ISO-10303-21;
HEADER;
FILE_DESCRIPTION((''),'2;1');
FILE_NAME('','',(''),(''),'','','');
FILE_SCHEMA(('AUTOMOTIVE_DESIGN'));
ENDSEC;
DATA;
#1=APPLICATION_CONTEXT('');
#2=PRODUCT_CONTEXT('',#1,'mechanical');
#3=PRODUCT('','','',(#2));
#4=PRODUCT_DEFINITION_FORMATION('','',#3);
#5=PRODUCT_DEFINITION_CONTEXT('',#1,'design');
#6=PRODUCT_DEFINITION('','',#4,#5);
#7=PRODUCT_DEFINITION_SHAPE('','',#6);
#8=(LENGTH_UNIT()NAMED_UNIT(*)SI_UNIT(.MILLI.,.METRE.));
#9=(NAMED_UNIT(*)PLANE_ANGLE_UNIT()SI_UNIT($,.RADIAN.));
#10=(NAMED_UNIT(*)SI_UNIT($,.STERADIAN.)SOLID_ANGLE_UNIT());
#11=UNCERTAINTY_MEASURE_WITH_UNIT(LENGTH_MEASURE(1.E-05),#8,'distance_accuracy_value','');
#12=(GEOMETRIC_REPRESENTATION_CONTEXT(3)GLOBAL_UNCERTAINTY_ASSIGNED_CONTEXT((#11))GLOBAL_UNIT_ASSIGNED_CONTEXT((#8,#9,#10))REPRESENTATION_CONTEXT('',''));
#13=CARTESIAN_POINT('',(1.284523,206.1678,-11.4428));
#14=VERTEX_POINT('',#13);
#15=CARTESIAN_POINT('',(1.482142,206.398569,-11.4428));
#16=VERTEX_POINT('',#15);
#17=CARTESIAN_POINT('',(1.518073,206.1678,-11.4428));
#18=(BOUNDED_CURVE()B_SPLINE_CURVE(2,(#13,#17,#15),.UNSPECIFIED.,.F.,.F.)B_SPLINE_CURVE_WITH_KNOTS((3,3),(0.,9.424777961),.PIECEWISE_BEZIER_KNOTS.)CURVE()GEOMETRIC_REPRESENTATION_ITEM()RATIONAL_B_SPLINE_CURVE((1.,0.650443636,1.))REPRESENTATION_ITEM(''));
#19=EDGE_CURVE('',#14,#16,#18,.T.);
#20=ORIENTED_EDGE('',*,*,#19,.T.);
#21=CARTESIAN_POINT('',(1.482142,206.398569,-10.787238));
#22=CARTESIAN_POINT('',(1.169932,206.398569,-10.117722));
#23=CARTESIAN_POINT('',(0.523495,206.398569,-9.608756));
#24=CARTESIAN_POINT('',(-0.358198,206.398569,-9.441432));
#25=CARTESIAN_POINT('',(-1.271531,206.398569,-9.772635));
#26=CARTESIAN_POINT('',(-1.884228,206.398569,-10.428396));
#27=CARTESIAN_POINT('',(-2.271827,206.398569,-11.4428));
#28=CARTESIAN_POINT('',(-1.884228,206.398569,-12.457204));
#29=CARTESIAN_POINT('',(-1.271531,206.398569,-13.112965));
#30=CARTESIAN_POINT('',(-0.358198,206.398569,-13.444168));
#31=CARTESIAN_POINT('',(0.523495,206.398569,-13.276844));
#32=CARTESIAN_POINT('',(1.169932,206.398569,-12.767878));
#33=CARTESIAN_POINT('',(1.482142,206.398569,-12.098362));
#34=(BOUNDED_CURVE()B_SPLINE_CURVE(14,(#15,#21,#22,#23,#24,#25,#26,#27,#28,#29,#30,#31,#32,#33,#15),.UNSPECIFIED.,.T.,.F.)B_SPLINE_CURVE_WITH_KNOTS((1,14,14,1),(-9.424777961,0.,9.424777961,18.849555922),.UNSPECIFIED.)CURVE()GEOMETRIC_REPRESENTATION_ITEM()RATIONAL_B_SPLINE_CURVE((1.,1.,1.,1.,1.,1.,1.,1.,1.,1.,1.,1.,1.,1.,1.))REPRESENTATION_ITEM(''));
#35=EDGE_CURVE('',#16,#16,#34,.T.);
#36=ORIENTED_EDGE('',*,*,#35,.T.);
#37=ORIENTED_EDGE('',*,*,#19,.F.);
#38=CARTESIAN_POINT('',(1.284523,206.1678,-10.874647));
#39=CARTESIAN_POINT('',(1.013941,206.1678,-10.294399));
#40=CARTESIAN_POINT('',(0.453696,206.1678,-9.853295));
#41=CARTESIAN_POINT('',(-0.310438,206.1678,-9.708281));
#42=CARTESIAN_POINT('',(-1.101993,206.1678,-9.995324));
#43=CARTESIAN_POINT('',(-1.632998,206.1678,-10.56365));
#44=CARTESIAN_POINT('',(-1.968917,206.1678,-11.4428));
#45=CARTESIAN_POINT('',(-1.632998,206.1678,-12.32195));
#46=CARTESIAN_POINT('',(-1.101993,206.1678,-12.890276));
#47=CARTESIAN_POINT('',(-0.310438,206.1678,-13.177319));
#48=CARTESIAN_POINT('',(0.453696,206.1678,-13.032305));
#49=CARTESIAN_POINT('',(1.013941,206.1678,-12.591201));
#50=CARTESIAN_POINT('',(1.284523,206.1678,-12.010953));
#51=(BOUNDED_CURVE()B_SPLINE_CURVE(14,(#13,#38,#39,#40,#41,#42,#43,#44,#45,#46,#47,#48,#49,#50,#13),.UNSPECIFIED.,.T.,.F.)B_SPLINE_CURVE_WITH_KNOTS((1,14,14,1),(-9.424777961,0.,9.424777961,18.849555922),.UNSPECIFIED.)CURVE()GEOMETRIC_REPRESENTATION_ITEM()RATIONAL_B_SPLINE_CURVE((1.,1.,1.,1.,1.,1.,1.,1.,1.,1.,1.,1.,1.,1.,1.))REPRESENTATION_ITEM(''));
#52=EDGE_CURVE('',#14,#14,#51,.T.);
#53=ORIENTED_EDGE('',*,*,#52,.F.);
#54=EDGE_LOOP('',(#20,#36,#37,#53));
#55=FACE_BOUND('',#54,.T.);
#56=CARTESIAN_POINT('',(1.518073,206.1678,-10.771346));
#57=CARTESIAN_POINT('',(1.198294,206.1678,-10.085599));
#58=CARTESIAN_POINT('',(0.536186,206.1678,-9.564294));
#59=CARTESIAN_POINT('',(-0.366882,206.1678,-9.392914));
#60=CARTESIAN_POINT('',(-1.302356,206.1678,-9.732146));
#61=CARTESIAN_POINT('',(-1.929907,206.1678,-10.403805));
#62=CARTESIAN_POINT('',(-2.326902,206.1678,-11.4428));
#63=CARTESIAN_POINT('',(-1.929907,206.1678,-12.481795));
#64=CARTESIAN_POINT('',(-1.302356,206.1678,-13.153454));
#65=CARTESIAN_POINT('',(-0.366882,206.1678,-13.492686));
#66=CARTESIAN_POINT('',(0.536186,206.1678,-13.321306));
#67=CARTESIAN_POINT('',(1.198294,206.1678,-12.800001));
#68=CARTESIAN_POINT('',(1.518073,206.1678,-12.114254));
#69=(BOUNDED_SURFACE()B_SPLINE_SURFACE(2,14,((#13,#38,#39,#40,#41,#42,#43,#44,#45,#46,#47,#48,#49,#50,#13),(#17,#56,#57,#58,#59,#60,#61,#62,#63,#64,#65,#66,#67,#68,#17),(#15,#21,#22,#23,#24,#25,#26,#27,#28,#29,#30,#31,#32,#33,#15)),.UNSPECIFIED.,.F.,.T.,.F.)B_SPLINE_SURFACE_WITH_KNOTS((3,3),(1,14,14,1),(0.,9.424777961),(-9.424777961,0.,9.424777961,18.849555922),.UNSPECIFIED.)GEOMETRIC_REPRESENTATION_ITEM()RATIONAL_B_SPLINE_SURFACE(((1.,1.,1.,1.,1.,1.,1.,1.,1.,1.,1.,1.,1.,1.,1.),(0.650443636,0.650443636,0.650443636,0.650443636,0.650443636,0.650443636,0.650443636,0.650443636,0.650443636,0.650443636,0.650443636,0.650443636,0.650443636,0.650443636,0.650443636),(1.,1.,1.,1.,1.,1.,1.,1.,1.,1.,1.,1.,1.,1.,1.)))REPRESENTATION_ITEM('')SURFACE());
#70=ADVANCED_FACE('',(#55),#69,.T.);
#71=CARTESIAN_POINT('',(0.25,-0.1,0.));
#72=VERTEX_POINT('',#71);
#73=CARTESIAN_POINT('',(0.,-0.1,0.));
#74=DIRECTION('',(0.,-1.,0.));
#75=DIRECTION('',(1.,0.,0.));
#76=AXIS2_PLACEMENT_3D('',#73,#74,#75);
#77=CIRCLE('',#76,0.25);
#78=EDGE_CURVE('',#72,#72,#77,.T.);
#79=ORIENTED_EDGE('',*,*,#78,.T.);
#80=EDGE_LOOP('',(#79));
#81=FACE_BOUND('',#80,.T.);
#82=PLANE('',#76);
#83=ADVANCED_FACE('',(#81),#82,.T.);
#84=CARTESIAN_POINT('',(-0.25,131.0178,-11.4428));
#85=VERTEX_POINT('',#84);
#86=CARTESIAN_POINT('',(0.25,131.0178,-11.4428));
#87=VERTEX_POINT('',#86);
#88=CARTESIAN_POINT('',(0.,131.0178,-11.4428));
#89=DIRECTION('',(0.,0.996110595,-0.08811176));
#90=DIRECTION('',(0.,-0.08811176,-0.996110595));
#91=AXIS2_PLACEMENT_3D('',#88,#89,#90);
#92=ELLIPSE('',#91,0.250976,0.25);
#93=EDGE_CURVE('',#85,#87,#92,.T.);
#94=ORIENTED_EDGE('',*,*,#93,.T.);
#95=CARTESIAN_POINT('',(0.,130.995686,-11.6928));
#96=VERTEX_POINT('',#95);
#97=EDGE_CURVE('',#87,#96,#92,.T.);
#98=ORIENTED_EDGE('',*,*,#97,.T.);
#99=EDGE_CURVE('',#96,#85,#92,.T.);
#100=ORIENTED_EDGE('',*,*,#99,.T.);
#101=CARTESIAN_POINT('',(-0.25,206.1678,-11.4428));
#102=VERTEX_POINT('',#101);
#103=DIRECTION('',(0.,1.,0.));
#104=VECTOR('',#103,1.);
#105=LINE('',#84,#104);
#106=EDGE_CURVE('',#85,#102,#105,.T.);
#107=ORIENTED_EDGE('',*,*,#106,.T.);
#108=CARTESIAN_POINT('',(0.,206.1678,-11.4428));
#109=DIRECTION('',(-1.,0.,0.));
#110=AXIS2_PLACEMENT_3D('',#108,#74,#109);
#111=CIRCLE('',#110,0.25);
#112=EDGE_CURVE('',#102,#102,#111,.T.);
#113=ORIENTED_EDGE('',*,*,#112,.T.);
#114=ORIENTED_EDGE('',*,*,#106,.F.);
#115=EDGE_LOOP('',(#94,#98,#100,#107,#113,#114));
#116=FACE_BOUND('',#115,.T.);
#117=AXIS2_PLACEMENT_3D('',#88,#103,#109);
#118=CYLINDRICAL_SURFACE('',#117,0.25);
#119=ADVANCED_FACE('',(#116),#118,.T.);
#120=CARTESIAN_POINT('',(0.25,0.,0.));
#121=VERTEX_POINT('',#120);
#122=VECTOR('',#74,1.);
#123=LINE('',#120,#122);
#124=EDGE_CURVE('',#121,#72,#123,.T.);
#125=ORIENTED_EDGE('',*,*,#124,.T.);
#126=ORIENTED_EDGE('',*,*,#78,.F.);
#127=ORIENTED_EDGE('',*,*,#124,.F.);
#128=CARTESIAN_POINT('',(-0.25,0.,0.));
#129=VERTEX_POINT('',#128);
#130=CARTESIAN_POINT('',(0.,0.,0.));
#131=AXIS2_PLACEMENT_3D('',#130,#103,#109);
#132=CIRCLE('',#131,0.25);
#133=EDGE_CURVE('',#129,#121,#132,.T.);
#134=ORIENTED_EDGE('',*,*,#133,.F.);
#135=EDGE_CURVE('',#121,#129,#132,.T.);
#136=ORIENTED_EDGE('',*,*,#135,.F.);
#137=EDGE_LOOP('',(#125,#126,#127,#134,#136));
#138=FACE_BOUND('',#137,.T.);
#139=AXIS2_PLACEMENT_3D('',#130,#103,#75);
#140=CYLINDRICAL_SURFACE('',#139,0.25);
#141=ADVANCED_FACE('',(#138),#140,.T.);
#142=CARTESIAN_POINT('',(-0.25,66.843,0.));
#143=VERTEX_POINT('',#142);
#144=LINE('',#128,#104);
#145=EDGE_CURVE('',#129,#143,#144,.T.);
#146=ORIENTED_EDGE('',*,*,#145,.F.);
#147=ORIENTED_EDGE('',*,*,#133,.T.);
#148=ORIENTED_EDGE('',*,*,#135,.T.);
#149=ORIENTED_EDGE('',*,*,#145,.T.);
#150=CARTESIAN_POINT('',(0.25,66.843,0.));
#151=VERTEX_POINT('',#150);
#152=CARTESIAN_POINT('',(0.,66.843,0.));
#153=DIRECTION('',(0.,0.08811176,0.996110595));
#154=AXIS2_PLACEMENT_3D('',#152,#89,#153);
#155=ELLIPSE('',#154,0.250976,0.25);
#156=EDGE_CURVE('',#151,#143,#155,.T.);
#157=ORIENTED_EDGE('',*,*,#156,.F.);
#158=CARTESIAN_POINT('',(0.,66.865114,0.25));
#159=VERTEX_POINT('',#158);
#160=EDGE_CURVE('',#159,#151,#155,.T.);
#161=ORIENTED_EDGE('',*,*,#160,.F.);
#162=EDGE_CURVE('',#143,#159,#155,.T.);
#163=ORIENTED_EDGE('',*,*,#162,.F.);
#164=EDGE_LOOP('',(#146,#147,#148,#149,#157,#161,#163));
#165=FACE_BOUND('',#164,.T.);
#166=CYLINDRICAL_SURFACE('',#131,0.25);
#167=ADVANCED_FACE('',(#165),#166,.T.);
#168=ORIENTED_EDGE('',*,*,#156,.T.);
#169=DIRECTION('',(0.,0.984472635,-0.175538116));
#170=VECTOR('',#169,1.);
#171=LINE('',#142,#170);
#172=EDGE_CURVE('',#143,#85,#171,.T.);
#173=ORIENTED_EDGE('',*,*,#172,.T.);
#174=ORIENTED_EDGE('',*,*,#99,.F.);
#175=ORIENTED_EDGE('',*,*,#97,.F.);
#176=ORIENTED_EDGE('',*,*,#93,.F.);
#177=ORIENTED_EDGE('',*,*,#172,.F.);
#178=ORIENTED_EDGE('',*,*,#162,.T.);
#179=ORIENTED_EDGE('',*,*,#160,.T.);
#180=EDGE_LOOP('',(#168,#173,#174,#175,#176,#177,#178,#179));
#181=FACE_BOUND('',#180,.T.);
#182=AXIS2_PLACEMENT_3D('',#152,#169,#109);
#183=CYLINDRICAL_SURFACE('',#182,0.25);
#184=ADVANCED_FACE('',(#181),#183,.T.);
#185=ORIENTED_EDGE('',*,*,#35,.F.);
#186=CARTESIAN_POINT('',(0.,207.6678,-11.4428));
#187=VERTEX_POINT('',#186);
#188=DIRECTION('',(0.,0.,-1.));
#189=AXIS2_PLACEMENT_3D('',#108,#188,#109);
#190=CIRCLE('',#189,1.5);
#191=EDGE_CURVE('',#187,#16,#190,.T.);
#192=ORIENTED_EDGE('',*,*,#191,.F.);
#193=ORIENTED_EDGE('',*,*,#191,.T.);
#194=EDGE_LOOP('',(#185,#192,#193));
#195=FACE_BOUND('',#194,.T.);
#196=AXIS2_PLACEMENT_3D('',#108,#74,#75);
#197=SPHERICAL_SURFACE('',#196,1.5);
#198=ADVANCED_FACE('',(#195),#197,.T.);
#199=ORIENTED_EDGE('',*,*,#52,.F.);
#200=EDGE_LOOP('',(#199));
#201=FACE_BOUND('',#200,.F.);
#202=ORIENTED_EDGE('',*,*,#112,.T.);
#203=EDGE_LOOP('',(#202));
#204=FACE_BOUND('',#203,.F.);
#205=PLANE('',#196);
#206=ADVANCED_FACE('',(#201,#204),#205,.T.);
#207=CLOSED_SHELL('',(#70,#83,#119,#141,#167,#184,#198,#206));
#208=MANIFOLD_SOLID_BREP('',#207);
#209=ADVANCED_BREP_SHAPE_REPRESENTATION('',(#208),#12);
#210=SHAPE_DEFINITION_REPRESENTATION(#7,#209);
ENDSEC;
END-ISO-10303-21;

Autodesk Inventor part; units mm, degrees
ref_plane "YZ Plane" through (0, 0, 0) normal (1, 0, 0) x (0, 1, 0)
ref_plane "XZ Plane" through (0, 0, 0) normal (0, 1, 0) x (-1, 0, 0)
sketch "Sketch1" plane through (0, 0, 0) normal (0, 1, 0) x (-1, 0, 0)
  circle A0 centre (0, 0) radius 0.25
  dimension "d0" = 0.5
sketch "Sketch2" plane through (0, 0, 0) normal (1, 0, 0) x (0, 1, 0)
  line L0 (0, 0) -> (66.843, 0)
  line L1 (66.843, 0) -> (131.0178, -11.4428)
  line L2 (131.0178, -11.4428) -> (206.1678, -11.4428)
  dimension "d1" = 66.843
  dimension "d2" = 169.89
  dimension "d3" = 65.187
  dimension "d4" = 75.15
sweep "Sweep1" add profiles "Sketch1" path "Sketch2"
sketch "Sketch3" plane through (0, 206.1678, -11.4428) normal (0, 1, 0) x (1, 0, 0)
  line L0 (0, 0) -> (-0.3702, 0) construction
  point P0 (0, -11.4428)
ref_plane "Work Plane1" through (0, 206.1678, -11.4428) normal (0, 0, -1) x (-1, 0, 0)
sketch "Sketch4" plane through (0, 206.1678, -11.4428) normal (0, 0, -1) x (-1, 0, 0)
  line L0 (0.25, 0) -> (-0.25, 0) projected
  circle A0 centre (0, 0) radius 1.5
  line L1 (0, 1.5) -> (0, 0)
  line L2 (0, 0) -> (-1.5, 0)
  point P0 (0, -206.1678)
  dimension "d8" = 3
revolve "Revolution1" add sketch "Sketch4" angle 360 about axis through (0, 207.6678, -11.4428) along (0, -1, 0) picked at (-0.1113, 0.9875) contours L0 L2 A0 L1
fillet "Fillet1" radius 0.2 1 edges at (-1.5, 206.1678, -11.4428)
sketch "Sketch5" plane through (0, 0, 0) normal (0, -1, 0) x (1, 0, 0)
  circle A0 centre (0, 0) radius 0.25 projected
extrude "Extrusion1" add sketch "Sketch5" along normal blind 0.1
properties part number "cable anular"
